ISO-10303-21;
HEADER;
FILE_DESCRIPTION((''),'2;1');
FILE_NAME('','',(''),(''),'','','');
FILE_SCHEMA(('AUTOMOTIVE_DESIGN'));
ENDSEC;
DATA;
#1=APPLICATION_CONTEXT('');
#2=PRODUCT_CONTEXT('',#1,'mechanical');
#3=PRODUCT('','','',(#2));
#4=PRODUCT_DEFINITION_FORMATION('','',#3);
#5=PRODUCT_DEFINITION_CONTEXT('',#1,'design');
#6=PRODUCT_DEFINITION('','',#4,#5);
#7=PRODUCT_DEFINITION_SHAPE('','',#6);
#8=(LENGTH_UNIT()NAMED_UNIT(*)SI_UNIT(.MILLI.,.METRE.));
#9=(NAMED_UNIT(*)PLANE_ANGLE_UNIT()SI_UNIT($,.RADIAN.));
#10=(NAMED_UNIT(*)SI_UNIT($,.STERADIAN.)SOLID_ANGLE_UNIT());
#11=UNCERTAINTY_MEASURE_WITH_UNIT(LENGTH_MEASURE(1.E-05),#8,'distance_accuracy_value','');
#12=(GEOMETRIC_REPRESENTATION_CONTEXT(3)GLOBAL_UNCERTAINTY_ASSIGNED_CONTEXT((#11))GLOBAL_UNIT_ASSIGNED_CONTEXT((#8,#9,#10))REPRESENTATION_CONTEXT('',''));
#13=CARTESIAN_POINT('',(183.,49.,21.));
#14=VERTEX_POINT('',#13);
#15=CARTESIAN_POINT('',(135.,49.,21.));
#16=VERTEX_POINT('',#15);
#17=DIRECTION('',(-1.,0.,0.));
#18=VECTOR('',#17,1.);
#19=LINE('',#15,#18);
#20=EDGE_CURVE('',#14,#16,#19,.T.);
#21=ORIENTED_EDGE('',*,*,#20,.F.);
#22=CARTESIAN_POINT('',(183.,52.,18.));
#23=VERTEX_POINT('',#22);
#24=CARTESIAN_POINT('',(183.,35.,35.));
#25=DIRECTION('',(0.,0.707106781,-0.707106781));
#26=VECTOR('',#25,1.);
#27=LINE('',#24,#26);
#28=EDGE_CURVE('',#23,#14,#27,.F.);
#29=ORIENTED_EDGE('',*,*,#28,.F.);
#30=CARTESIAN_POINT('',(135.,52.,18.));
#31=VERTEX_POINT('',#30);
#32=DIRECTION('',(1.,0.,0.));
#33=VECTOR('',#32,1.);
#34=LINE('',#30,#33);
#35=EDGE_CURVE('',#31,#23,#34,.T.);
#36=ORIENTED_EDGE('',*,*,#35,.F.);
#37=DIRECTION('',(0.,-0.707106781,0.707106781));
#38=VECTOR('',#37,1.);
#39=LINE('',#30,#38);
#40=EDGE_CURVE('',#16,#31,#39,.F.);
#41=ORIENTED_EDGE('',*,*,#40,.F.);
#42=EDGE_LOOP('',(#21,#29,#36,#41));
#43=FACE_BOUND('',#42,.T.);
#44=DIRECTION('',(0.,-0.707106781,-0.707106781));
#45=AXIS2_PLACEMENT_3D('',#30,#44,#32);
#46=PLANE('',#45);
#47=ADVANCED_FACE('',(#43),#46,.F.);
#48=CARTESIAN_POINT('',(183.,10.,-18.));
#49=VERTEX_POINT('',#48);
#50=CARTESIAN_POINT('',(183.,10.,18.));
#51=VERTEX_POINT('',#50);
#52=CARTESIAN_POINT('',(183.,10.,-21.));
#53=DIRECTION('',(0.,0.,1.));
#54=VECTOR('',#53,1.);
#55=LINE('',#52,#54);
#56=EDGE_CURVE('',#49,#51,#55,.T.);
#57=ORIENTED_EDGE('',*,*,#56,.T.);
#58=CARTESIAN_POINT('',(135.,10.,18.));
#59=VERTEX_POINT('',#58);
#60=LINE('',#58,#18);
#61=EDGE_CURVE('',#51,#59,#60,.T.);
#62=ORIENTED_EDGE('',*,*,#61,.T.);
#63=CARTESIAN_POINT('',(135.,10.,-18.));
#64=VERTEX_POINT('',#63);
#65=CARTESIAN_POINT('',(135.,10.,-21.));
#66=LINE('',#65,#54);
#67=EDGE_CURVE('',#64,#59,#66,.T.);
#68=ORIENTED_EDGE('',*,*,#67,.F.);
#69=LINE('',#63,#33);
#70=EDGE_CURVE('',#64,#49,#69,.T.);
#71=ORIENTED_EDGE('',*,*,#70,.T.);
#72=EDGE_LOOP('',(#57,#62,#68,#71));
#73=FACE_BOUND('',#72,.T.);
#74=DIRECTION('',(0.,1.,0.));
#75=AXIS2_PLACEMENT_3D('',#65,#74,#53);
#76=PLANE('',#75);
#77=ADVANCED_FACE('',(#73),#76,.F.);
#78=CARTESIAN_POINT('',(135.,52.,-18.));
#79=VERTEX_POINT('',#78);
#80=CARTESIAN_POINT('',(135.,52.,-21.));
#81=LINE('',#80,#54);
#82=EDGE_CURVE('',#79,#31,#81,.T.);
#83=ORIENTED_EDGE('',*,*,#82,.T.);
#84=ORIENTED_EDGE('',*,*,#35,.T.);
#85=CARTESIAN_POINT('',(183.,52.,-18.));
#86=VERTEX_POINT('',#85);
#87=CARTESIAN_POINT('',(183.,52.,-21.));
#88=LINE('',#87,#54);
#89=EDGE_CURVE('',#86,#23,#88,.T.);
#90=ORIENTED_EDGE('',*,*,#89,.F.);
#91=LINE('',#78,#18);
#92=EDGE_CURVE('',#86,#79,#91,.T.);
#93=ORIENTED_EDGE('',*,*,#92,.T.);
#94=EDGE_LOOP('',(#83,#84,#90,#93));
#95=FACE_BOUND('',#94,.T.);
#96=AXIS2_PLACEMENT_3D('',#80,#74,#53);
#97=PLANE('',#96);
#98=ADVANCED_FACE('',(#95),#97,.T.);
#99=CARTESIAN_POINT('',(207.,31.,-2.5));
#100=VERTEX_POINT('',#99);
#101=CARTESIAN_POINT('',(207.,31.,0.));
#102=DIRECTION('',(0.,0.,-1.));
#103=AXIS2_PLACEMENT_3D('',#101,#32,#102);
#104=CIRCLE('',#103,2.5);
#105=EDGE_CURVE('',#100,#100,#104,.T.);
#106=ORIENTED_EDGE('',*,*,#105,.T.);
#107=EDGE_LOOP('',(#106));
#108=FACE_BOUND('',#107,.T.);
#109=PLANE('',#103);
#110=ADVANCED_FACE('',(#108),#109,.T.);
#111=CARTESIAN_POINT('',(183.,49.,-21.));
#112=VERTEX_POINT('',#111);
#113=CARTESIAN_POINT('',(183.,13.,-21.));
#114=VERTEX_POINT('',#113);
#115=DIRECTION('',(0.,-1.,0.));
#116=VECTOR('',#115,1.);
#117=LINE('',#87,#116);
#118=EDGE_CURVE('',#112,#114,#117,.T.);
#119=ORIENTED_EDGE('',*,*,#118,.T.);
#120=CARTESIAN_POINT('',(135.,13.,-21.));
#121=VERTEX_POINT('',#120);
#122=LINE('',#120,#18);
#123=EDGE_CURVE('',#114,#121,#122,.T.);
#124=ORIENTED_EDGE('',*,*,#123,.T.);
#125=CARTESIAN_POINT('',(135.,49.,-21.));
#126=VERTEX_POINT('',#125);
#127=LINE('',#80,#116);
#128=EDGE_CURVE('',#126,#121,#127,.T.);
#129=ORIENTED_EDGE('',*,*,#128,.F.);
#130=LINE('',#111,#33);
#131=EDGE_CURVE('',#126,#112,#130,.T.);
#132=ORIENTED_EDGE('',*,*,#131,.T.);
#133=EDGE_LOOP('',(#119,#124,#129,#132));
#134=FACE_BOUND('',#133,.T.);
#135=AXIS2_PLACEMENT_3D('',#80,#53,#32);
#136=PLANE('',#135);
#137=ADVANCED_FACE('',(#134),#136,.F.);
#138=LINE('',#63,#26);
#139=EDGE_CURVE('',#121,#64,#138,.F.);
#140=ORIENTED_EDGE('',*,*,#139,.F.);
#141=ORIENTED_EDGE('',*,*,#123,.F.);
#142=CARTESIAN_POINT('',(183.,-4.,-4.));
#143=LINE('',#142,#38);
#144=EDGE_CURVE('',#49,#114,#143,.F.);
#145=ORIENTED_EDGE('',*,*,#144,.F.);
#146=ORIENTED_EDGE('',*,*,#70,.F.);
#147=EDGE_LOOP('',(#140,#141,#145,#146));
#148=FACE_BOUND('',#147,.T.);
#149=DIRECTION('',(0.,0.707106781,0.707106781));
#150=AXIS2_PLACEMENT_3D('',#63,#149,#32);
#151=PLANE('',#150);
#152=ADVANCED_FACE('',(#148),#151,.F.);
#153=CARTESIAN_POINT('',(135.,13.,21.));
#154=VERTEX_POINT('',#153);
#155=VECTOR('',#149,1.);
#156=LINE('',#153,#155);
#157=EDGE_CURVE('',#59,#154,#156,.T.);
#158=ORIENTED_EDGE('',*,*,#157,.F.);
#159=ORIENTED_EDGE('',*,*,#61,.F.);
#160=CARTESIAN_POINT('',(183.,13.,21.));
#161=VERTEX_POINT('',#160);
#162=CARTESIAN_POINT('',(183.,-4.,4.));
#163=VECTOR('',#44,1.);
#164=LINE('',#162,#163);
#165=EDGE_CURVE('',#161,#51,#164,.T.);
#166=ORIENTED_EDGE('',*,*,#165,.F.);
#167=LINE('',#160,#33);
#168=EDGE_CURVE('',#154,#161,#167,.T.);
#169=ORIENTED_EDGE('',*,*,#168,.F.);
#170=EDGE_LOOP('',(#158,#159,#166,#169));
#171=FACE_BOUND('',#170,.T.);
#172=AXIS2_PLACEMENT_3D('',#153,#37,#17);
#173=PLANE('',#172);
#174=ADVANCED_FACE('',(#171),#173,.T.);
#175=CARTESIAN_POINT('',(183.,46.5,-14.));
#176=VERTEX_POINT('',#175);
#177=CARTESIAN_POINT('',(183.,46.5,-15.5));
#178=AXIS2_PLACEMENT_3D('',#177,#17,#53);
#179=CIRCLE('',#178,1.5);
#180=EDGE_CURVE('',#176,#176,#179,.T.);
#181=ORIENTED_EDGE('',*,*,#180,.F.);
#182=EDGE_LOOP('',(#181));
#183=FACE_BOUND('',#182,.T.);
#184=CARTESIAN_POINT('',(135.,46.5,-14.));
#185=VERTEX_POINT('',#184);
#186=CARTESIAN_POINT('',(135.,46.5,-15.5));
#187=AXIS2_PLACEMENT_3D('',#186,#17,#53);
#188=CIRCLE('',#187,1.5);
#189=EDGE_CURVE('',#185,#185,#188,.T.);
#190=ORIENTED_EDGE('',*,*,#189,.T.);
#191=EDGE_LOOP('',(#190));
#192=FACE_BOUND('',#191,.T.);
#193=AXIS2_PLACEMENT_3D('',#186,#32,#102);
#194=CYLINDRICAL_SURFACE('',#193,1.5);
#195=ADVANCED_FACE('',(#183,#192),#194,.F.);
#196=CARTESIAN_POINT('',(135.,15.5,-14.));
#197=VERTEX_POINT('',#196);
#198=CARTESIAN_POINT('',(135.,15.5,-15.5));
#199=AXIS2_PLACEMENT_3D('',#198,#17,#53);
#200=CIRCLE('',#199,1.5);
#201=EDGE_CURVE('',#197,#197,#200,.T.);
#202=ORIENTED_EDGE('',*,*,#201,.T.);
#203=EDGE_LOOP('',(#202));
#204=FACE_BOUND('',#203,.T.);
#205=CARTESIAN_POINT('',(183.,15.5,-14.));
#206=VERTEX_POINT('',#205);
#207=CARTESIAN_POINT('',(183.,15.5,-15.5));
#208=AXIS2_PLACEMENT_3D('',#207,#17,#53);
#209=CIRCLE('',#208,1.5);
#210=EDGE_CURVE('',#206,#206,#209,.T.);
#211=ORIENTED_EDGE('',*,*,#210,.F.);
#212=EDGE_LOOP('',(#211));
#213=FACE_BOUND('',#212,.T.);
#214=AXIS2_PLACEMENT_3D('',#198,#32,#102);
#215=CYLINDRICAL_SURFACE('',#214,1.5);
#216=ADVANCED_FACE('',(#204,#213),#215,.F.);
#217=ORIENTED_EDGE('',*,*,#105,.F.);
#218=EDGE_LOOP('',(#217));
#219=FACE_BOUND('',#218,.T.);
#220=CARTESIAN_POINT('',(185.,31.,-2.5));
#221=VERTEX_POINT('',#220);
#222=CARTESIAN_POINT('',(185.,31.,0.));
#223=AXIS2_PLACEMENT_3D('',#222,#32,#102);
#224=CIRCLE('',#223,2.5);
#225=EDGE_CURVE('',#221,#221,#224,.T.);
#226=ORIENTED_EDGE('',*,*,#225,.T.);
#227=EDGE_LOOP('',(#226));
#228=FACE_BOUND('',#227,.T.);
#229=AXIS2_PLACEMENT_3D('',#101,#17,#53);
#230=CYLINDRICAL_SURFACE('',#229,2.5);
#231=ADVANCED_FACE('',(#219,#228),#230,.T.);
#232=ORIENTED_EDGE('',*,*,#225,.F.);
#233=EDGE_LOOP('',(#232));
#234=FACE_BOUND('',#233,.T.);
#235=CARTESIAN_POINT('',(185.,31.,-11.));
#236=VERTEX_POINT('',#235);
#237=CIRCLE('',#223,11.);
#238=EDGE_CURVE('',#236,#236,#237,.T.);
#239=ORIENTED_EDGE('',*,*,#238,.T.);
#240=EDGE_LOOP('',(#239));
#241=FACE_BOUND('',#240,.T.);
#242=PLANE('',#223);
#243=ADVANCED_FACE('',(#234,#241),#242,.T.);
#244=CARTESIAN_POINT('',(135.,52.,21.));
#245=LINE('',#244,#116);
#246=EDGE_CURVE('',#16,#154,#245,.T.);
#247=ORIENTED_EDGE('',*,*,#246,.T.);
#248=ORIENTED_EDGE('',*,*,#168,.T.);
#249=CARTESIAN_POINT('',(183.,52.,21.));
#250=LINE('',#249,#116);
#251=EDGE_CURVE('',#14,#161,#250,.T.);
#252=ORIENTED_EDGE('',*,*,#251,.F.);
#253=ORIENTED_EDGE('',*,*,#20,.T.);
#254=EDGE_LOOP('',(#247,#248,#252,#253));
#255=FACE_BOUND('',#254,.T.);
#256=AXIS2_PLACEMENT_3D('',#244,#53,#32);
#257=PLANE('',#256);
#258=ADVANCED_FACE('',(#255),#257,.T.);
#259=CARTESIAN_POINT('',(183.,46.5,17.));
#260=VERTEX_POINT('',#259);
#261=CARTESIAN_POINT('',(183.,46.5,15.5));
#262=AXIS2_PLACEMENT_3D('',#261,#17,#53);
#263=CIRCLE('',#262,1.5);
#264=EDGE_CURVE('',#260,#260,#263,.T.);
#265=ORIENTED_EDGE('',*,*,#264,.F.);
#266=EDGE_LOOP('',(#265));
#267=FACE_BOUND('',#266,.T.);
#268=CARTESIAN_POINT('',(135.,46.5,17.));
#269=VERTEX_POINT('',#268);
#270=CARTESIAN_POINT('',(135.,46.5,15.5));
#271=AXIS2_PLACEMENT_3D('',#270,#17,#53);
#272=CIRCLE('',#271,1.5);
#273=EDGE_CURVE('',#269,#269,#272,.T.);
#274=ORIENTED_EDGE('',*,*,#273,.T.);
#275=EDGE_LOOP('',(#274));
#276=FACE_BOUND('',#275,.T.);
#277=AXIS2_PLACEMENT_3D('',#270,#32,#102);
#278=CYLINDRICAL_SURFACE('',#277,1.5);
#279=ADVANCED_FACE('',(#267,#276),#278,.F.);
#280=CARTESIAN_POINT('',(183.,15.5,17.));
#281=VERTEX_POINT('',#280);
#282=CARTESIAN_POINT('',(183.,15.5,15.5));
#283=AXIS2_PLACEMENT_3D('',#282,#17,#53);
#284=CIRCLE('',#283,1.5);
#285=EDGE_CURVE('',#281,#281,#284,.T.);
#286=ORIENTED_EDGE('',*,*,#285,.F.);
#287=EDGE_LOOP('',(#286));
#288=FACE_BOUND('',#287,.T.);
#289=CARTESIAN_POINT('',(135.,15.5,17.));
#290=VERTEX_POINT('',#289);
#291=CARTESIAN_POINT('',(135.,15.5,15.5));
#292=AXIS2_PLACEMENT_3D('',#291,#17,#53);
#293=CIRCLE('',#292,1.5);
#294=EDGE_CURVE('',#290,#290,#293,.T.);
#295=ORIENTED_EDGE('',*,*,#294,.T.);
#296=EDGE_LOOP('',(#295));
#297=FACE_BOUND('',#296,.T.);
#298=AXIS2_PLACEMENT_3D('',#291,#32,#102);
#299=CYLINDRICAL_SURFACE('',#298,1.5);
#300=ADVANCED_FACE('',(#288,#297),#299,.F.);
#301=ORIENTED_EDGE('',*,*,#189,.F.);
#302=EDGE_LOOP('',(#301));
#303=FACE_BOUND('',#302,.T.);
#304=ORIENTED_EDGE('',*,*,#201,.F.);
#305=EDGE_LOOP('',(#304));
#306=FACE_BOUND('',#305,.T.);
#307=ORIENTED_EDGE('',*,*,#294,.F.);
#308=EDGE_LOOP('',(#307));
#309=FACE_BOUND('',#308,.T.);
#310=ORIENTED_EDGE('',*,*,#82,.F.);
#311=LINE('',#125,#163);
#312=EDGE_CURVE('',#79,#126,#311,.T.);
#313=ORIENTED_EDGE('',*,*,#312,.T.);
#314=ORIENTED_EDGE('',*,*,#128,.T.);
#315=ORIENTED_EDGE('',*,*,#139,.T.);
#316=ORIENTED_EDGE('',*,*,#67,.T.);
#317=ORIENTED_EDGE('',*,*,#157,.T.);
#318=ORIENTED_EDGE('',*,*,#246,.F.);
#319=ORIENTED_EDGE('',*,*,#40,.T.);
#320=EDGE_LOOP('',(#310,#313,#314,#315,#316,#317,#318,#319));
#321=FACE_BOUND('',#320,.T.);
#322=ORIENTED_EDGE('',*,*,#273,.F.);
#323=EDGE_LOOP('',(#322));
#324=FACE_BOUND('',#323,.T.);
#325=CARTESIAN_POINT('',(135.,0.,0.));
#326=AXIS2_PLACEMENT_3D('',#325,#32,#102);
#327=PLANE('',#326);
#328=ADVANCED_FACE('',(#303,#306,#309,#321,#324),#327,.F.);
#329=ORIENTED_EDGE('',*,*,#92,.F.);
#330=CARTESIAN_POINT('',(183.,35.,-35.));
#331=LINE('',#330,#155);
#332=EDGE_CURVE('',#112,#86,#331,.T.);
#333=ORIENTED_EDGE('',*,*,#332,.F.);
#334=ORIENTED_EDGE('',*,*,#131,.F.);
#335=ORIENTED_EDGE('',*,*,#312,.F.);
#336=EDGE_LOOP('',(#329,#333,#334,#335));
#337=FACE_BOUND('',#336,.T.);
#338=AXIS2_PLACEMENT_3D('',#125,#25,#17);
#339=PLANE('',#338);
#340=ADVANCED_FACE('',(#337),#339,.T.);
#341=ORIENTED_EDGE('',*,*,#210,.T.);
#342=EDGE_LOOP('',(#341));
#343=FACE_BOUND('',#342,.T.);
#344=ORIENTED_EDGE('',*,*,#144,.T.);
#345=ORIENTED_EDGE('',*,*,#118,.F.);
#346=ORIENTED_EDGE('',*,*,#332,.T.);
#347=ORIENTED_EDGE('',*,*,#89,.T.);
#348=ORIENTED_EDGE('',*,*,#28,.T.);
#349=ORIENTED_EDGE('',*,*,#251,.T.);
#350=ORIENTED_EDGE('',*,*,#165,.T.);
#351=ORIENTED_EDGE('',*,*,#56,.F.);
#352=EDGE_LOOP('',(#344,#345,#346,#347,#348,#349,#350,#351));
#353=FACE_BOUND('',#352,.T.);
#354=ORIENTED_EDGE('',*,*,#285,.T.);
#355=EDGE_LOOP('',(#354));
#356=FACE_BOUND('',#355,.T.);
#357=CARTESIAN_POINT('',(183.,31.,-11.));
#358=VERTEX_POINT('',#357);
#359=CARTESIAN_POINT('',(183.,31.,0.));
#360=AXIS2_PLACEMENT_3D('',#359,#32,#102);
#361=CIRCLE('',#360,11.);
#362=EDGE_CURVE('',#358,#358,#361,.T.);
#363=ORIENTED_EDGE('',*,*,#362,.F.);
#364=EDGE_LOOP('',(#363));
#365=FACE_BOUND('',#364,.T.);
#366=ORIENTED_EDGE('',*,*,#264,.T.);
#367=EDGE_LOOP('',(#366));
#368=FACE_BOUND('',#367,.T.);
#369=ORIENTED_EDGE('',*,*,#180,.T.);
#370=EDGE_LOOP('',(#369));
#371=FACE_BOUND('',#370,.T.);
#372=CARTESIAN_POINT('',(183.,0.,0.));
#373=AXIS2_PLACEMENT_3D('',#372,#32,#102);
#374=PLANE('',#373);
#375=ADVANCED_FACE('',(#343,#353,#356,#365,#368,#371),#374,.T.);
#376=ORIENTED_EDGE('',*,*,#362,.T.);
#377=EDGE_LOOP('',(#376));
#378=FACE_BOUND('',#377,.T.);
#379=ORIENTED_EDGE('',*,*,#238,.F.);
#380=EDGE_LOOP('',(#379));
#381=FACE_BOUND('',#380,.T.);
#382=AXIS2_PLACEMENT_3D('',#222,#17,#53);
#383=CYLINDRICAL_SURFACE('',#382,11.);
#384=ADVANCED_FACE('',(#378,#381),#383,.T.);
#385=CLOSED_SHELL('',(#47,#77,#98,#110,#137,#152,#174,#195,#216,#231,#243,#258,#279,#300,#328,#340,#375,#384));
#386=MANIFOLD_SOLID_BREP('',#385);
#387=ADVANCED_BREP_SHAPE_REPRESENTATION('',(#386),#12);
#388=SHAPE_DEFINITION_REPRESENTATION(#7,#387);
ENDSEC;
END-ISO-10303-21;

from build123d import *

# Parameters (mm, degrees)
STOCK_AXIS_MASTER_1_START       = 135
STOCK_AXIS_MASTER_1_OUTLINE_R   = 1.5
STOCK_AXIS_MASTER_1_DEPTH       = 48
STOCK_AXIS_MASTER_1_START_2     = 185.5
STOCK_AXIS_MASTER_1_2_OUTLINE_R = 7.25
STOCK_AXIS_MASTER_1_2_DEPTH     = 19
STOCK_AXIS_MASTER_1_START_3     = 183
STOCK_AXIS_MASTER_1_3_OUTLINE_R = 11
STOCK_AXIS_MASTER_1_3_DEPTH     = 2
STOCK_AXIS_MASTER_1_START_4     = 185
STOCK_AXIS_MASTER_1_4_OUTLINE_R = 2.5
STOCK_AXIS_MASTER_1_4_DEPTH     = 22
CUT_EXTRUDE1_START              = -22
SKETCH1_R                       = 7.25
SKETCH1_R_2                     = 2.5
CUT_EXTRUDE1_DEPTH              = 22


# Read off the part's stored shape, not the designer's step: Stock-axis-master-1
with BuildPart() as part:
    # Stock-axis-master-1 outline → Stock-axis-master-1 (new body)
    with BuildSketch(Plane.YZ.offset(STOCK_AXIS_MASTER_1_START)):
        Polygon((49, -21), (52, -18), (52, 18), (49, 21), (13, 21), (10, 18), (10, -18), (13, -21), align=None)
        with Locations((15.5, -15.5)):
            Circle(STOCK_AXIS_MASTER_1_OUTLINE_R, mode=Mode.SUBTRACT)
        with Locations((46.5, -15.5)):
            Circle(STOCK_AXIS_MASTER_1_OUTLINE_R, mode=Mode.SUBTRACT)
        with Locations((15.5, 15.5)):
            Circle(STOCK_AXIS_MASTER_1_OUTLINE_R, mode=Mode.SUBTRACT)
        with Locations((46.5, 15.5)):
            Circle(STOCK_AXIS_MASTER_1_OUTLINE_R, mode=Mode.SUBTRACT)
    extrude(amount=STOCK_AXIS_MASTER_1_DEPTH)

    # Stock-axis-master-1 3 outline → Stock-axis-master-1 3 (add)
    with BuildSketch(Plane.YZ.offset(STOCK_AXIS_MASTER_1_START_3)):
        with Locations((31, 0)):
            Circle(STOCK_AXIS_MASTER_1_3_OUTLINE_R)
    extrude(amount=STOCK_AXIS_MASTER_1_3_DEPTH)



with BuildPart() as body_2:
    # Stock-axis-master-1 2 outline → Stock-axis-master-1 2 (new body)
    with BuildSketch(Plane.YZ.offset(STOCK_AXIS_MASTER_1_START_2)):
        with Locations((31, 0)):
            Circle(STOCK_AXIS_MASTER_1_2_OUTLINE_R)
    extrude(amount=STOCK_AXIS_MASTER_1_2_DEPTH)


with BuildPart() as part_1:
    add(part.part)

    add(body_2.part)  # Stock-axis-master-1 4 merges body 2
    # Stock-axis-master-1 4 outline → Stock-axis-master-1 4 (add)
    with BuildSketch(Plane.YZ.offset(STOCK_AXIS_MASTER_1_START_4)):
        with Locations((31, 0)):
            Circle(STOCK_AXIS_MASTER_1_4_OUTLINE_R)
    extrude(amount=STOCK_AXIS_MASTER_1_4_DEPTH)

    # Sketch1 → Cut-Extrude1 (cut)
    with BuildSketch(Plane(origin=(207, 0, 0), x_dir=(0, 0, -1), z_dir=(1, 0, 0)).offset(CUT_EXTRUDE1_START)):
        with Locations((0, 31)):
            Circle(SKETCH1_R)
        with Locations((0, 31)):
            Circle(SKETCH1_R_2, mode=Mode.SUBTRACT)
    extrude(amount=CUT_EXTRUDE1_DEPTH, mode=Mode.SUBTRACT)


solid = part_1.part
